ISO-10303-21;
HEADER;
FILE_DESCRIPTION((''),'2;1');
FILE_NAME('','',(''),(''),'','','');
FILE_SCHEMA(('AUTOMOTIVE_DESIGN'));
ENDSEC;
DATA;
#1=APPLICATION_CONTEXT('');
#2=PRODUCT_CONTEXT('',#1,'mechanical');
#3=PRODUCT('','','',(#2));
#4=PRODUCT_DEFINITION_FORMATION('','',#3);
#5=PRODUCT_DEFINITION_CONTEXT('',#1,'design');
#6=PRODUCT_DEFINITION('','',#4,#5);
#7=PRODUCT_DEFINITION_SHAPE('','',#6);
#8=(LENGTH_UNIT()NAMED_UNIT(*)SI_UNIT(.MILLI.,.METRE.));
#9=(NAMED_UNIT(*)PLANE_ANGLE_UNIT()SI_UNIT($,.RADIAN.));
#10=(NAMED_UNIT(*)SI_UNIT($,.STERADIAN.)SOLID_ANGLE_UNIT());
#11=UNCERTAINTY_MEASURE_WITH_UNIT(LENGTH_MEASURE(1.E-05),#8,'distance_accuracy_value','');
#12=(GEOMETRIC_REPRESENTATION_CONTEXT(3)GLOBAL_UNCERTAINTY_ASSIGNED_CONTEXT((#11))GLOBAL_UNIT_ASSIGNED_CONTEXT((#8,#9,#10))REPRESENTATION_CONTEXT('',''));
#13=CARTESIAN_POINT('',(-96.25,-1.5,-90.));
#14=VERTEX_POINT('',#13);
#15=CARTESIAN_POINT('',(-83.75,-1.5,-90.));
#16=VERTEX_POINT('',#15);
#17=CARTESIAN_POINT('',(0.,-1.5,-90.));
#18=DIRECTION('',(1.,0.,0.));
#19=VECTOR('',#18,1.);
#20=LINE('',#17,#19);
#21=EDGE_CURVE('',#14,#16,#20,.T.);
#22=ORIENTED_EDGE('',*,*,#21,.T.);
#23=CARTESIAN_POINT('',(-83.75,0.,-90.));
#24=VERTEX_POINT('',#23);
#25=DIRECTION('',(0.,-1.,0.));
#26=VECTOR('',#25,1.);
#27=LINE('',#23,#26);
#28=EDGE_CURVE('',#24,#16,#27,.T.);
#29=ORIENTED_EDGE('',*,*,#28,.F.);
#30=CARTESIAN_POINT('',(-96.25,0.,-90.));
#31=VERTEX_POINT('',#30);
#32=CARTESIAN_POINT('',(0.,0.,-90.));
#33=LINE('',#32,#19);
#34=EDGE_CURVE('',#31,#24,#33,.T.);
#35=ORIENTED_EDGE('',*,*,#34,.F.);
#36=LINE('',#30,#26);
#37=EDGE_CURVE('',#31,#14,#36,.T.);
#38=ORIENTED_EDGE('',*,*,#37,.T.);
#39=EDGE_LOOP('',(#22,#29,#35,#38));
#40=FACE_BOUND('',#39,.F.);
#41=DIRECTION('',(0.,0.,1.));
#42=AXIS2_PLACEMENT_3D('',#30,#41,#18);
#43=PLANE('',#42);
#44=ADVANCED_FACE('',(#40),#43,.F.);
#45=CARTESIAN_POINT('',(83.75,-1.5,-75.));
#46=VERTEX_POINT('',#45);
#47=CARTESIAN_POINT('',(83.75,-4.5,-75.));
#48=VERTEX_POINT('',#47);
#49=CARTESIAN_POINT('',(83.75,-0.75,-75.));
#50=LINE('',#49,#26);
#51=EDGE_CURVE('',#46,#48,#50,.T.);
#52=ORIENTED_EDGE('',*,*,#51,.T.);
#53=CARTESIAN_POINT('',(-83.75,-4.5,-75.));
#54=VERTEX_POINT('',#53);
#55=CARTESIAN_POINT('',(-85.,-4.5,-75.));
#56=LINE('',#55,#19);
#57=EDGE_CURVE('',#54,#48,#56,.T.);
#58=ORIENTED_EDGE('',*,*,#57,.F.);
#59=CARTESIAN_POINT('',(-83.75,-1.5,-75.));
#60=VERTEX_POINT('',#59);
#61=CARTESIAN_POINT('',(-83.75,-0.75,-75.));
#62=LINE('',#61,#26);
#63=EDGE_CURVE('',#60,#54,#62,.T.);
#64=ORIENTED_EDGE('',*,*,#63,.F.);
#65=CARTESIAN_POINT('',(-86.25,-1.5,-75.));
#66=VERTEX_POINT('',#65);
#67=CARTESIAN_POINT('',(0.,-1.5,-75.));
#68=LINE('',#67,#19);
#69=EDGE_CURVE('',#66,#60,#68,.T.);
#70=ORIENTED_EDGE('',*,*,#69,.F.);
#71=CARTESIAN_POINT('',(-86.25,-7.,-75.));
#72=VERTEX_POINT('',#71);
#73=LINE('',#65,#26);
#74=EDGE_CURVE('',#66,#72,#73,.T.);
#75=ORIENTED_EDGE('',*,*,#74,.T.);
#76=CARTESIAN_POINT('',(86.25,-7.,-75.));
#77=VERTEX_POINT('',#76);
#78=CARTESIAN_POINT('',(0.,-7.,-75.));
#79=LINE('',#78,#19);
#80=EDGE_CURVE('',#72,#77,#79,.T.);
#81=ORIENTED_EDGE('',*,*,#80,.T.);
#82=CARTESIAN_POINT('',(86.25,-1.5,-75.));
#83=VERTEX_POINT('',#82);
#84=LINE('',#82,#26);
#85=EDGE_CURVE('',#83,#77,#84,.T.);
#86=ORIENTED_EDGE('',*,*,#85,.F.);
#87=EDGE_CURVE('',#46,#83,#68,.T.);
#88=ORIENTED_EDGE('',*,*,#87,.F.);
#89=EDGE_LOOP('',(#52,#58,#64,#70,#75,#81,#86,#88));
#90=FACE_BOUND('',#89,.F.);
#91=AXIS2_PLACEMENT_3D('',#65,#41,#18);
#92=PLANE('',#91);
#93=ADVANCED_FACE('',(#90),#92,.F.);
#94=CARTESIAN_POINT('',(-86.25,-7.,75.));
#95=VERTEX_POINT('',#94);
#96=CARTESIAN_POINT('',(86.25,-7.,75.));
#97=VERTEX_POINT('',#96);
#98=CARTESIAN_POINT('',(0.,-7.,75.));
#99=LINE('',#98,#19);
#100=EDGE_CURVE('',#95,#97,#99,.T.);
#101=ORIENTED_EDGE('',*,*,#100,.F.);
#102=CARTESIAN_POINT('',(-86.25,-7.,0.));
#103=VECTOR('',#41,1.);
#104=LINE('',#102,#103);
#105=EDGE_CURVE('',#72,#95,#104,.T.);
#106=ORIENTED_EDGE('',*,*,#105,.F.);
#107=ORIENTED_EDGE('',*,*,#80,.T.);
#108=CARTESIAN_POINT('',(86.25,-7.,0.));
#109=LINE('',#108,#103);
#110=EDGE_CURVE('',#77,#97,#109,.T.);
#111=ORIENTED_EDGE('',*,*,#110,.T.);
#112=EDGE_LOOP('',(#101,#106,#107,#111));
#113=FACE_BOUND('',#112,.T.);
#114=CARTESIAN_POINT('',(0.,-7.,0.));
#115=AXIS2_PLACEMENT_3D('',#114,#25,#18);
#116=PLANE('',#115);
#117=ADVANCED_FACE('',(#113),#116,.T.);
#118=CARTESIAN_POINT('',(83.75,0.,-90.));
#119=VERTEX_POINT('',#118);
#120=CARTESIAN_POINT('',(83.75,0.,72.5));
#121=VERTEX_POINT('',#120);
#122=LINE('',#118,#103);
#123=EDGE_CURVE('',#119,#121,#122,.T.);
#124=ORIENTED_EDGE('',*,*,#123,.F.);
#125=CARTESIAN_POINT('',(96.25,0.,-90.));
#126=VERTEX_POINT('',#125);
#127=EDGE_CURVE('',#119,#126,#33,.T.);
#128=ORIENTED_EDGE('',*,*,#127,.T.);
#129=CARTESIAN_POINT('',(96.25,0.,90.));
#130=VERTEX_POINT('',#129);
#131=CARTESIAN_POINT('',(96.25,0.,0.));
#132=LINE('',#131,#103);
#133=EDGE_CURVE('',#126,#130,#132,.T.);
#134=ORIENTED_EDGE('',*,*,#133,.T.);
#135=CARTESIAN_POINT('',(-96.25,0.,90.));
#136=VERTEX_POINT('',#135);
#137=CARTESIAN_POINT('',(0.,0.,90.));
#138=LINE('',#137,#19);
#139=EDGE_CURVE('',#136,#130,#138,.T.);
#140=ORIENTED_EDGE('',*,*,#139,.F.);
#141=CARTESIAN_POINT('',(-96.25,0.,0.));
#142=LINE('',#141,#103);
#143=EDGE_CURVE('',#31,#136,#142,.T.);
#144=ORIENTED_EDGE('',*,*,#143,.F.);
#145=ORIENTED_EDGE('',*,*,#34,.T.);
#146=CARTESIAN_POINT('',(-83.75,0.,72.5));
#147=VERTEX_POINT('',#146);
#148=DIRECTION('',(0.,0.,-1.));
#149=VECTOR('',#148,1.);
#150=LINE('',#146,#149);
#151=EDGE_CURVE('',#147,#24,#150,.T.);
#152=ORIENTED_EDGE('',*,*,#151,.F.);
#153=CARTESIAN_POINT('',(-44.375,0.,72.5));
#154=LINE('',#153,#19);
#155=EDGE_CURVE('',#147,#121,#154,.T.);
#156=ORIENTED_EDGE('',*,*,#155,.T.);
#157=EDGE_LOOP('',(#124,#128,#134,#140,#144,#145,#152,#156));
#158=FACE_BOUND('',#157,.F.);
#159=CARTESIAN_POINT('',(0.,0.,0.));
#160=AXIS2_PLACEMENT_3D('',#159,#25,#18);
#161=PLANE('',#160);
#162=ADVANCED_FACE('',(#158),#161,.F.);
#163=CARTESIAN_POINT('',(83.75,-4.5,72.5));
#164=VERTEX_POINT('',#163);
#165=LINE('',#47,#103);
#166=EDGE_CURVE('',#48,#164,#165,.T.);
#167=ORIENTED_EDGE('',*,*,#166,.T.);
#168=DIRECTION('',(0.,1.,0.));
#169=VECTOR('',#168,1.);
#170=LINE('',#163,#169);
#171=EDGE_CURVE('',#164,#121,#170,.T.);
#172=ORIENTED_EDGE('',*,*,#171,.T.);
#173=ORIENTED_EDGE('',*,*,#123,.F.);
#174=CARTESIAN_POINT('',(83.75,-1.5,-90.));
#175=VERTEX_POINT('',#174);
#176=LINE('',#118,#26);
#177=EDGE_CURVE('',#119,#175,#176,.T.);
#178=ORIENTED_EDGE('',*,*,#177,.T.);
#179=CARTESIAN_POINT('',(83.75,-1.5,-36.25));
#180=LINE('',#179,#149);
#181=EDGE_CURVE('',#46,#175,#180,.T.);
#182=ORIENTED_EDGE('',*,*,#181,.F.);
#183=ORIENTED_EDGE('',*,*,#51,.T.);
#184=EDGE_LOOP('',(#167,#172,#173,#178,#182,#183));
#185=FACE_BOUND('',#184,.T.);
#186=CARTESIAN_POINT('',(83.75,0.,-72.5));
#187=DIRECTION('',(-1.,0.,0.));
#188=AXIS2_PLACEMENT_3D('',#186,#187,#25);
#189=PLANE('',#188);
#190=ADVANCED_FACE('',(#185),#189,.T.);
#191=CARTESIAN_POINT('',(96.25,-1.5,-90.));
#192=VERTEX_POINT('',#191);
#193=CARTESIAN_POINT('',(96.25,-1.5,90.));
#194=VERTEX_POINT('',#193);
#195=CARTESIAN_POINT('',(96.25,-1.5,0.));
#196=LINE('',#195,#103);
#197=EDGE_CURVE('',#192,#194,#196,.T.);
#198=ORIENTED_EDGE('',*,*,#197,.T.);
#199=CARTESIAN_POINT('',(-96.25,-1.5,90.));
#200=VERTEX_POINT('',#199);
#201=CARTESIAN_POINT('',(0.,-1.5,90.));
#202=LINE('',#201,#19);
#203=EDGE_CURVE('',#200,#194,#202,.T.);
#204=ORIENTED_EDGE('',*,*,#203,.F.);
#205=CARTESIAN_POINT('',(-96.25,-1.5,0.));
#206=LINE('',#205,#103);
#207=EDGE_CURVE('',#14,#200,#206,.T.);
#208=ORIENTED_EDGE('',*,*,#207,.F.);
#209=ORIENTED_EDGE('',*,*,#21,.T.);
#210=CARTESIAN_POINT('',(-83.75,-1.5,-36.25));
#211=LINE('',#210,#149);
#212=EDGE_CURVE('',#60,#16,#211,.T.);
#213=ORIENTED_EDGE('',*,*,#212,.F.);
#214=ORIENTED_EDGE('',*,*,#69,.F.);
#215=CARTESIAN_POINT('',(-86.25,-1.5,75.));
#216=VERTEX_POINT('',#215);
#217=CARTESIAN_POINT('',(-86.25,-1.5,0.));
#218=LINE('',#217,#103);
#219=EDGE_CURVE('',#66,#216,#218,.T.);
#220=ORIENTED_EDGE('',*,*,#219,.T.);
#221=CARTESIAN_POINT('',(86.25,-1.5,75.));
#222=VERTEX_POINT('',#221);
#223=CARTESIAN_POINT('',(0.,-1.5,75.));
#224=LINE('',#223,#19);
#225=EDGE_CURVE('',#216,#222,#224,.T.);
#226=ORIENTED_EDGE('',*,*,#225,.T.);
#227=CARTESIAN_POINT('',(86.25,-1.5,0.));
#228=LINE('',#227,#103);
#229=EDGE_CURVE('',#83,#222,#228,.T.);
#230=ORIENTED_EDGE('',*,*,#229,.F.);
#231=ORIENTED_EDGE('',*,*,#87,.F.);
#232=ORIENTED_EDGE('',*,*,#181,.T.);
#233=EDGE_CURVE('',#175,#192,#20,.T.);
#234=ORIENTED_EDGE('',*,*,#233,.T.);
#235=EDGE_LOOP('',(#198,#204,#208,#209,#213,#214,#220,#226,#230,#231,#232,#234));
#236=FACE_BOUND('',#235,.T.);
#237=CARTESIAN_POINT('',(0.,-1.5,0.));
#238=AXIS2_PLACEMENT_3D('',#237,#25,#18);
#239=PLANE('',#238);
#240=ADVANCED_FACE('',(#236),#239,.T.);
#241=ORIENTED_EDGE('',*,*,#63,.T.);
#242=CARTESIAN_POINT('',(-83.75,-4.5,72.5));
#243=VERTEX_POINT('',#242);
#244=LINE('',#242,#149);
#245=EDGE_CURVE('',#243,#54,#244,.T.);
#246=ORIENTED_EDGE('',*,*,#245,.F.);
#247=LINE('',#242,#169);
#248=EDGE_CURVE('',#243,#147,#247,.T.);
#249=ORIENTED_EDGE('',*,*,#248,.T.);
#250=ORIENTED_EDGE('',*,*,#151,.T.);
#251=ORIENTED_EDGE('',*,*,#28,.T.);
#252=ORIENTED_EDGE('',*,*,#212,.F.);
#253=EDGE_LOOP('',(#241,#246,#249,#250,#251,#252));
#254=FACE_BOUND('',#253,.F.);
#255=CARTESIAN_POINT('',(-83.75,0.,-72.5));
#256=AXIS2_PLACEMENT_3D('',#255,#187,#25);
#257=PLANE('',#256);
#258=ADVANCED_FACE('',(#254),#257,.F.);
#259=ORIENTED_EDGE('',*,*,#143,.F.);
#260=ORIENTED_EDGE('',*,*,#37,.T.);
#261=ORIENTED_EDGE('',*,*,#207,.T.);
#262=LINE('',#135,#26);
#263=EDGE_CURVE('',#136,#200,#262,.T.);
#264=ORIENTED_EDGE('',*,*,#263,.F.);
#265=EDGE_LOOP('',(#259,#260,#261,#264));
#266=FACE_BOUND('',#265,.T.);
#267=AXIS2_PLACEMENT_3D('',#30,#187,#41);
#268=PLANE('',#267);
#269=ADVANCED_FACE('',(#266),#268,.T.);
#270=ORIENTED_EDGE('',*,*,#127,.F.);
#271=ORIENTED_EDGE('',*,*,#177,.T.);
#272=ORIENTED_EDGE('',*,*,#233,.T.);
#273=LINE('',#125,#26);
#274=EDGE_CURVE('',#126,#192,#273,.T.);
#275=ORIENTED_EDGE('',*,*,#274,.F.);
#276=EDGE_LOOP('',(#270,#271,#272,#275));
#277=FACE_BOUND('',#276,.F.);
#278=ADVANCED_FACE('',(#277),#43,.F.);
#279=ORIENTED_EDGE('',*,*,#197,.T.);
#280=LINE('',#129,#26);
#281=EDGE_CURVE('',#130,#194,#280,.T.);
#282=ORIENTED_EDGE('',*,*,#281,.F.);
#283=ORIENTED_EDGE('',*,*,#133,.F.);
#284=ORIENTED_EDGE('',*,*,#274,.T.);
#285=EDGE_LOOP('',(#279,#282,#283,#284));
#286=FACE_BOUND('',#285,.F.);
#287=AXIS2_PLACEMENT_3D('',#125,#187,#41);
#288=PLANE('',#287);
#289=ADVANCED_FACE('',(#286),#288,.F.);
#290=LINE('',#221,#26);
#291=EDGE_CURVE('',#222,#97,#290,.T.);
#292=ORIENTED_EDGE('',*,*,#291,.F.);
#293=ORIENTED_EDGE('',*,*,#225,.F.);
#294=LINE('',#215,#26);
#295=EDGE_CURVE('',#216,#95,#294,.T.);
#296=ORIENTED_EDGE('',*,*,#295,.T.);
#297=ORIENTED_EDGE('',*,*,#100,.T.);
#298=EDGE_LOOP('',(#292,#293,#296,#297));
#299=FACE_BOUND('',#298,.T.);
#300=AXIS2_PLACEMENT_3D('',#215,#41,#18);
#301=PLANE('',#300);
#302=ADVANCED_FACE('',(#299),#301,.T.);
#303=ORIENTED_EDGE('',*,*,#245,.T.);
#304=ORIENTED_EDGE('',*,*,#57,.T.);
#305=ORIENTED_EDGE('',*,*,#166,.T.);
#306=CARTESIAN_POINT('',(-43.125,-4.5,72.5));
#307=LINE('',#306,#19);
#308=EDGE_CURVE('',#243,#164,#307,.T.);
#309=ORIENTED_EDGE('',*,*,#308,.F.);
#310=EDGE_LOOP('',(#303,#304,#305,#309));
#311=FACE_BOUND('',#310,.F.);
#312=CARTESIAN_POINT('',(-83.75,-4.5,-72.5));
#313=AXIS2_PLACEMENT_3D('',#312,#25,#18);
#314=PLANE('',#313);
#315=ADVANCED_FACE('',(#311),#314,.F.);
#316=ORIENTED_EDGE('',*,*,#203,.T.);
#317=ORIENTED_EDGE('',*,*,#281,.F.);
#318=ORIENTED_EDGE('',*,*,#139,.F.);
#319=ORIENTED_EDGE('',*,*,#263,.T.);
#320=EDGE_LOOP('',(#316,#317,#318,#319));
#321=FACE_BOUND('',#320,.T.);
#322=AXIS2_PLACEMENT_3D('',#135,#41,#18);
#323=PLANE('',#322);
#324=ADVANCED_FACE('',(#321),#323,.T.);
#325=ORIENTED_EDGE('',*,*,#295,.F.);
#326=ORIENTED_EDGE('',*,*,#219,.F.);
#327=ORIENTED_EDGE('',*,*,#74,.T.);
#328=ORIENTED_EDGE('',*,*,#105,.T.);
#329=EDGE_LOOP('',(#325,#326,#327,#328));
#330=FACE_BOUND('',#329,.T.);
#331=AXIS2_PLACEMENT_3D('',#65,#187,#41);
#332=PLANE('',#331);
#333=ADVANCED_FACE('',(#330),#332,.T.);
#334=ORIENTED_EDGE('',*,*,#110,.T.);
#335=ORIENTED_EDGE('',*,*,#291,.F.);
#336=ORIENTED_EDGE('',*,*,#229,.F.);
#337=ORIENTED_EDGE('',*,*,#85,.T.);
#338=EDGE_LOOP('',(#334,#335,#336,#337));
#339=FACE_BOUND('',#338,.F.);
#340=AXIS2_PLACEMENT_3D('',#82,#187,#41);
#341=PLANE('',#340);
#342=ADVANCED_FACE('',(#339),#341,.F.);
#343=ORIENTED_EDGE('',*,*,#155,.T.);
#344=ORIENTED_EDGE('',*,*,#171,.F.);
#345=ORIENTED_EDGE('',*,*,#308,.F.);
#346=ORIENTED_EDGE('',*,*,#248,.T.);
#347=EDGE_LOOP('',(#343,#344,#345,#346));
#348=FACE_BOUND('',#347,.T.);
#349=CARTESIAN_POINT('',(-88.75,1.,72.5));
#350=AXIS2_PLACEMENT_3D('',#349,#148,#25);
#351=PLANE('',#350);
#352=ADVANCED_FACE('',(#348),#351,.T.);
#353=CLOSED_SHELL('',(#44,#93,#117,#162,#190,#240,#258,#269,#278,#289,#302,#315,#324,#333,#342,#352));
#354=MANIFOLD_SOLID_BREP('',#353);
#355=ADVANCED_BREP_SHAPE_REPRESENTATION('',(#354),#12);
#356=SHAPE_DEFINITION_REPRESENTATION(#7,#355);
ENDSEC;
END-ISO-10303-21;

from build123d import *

# Parameters (mm, degrees)
F0_W        = 192.5
F0_H        = 180
F1_DEPTH    = 1.5
F2_W        = 172.5
F2_H        = 150
F3_DEPTH    = 5.5
F4_T        = 2.5
F4_T3_DEPTH = 155
F4_T5_DEPTH = 177.5
F6_W        = 167.5
F6_H        = 4.5
F7_DEPTH    = 17.501


# Not quite as in the source:
# - a shell that OpenCascade refuses in one call is made with other operations: the cavity is built on its own and cut out


with BuildPart() as f1:
    # F0 (on Front) → F1 (new body)
    with BuildSketch(Plane.XZ):
        Rectangle(F0_W, F0_H)
    extrude(amount=F1_DEPTH)

    # F2 (on face) → F3 (join)
    with BuildSketch(Plane.XZ.offset(1.5)):
        Rectangle(F2_W, F2_H)
    extrude(amount=F3_DEPTH)

    # F4: shell of thickness 2.5, made by hand


with BuildPart() as f4_core1:
    # F4_t2: copy of F1
    add(f1.part)

    # the walls: a layer under each face that stays
    f4_faces = [f4_core1.faces().sort_by_distance(p)[0] for p in [
        (96.25, -0.75, 0),
        (0, -0.75, -90),
        (0, -0.75, 90),
        (-82.5, -1.5, -77.1428571429),
        (-96.25, -0.75, 0),
        (86.25, -4.25, 0),
        (0, -4.25, 75),
        (-86.25, -4.25, 0),
        (0, -4.25, -75),
        (0, -7, 0),
    ]]
    thicken(f4_faces, amount=-F4_T, mode=Mode.SUBTRACT)

    # F4_s4 → F4_t3 (cut)
    with BuildSketch(Plane.XY.offset(-77.5)):
        Polygon((86.275, -1.525), (86.25, 1), (83.75, 1), (83.75, -1.5), align=None)
        Polygon((-86.275, -1.525), (-86.25, 1), (-83.75, 1), (-83.75, -1.5), align=None)
    extrude(amount=F4_T3_DEPTH, mode=Mode.SUBTRACT)

    # F4_s6 → F4_t5 (cut)
    with BuildSketch(Plane.YZ.offset(-88.75)):
        Polygon((-1.525, 75.025), (1, 75), (1, 72.5), (-1.5, 72.5), align=None)
        Polygon((-1.525, -75.025), (1, -75), (1, -72.5), (-1.5, -72.5), align=None)
    extrude(amount=F4_T5_DEPTH, mode=Mode.SUBTRACT)


with BuildPart() as f1_1:
    add(f1.part)

    # what is left inside the walls is the cavity
    f4_cavity = [f4_core1.part.solids().sort_by_distance(p)[0] for p in [
        (0, -0.025, -24.166667),
    ]]
    add(f4_cavity, mode=Mode.SUBTRACT)

    # F6 (on face) → F7 (cut, through all)
    with BuildSketch(Plane(origin=(0, 0, -72.5), x_dir=(1, 0, 0), z_dir=(0, 0, -1))):
        with Locations((0, 2.25)):
            Rectangle(F6_W, F6_H)
    extrude(amount=F7_DEPTH, mode=Mode.SUBTRACT)


solid = f1_1.part
